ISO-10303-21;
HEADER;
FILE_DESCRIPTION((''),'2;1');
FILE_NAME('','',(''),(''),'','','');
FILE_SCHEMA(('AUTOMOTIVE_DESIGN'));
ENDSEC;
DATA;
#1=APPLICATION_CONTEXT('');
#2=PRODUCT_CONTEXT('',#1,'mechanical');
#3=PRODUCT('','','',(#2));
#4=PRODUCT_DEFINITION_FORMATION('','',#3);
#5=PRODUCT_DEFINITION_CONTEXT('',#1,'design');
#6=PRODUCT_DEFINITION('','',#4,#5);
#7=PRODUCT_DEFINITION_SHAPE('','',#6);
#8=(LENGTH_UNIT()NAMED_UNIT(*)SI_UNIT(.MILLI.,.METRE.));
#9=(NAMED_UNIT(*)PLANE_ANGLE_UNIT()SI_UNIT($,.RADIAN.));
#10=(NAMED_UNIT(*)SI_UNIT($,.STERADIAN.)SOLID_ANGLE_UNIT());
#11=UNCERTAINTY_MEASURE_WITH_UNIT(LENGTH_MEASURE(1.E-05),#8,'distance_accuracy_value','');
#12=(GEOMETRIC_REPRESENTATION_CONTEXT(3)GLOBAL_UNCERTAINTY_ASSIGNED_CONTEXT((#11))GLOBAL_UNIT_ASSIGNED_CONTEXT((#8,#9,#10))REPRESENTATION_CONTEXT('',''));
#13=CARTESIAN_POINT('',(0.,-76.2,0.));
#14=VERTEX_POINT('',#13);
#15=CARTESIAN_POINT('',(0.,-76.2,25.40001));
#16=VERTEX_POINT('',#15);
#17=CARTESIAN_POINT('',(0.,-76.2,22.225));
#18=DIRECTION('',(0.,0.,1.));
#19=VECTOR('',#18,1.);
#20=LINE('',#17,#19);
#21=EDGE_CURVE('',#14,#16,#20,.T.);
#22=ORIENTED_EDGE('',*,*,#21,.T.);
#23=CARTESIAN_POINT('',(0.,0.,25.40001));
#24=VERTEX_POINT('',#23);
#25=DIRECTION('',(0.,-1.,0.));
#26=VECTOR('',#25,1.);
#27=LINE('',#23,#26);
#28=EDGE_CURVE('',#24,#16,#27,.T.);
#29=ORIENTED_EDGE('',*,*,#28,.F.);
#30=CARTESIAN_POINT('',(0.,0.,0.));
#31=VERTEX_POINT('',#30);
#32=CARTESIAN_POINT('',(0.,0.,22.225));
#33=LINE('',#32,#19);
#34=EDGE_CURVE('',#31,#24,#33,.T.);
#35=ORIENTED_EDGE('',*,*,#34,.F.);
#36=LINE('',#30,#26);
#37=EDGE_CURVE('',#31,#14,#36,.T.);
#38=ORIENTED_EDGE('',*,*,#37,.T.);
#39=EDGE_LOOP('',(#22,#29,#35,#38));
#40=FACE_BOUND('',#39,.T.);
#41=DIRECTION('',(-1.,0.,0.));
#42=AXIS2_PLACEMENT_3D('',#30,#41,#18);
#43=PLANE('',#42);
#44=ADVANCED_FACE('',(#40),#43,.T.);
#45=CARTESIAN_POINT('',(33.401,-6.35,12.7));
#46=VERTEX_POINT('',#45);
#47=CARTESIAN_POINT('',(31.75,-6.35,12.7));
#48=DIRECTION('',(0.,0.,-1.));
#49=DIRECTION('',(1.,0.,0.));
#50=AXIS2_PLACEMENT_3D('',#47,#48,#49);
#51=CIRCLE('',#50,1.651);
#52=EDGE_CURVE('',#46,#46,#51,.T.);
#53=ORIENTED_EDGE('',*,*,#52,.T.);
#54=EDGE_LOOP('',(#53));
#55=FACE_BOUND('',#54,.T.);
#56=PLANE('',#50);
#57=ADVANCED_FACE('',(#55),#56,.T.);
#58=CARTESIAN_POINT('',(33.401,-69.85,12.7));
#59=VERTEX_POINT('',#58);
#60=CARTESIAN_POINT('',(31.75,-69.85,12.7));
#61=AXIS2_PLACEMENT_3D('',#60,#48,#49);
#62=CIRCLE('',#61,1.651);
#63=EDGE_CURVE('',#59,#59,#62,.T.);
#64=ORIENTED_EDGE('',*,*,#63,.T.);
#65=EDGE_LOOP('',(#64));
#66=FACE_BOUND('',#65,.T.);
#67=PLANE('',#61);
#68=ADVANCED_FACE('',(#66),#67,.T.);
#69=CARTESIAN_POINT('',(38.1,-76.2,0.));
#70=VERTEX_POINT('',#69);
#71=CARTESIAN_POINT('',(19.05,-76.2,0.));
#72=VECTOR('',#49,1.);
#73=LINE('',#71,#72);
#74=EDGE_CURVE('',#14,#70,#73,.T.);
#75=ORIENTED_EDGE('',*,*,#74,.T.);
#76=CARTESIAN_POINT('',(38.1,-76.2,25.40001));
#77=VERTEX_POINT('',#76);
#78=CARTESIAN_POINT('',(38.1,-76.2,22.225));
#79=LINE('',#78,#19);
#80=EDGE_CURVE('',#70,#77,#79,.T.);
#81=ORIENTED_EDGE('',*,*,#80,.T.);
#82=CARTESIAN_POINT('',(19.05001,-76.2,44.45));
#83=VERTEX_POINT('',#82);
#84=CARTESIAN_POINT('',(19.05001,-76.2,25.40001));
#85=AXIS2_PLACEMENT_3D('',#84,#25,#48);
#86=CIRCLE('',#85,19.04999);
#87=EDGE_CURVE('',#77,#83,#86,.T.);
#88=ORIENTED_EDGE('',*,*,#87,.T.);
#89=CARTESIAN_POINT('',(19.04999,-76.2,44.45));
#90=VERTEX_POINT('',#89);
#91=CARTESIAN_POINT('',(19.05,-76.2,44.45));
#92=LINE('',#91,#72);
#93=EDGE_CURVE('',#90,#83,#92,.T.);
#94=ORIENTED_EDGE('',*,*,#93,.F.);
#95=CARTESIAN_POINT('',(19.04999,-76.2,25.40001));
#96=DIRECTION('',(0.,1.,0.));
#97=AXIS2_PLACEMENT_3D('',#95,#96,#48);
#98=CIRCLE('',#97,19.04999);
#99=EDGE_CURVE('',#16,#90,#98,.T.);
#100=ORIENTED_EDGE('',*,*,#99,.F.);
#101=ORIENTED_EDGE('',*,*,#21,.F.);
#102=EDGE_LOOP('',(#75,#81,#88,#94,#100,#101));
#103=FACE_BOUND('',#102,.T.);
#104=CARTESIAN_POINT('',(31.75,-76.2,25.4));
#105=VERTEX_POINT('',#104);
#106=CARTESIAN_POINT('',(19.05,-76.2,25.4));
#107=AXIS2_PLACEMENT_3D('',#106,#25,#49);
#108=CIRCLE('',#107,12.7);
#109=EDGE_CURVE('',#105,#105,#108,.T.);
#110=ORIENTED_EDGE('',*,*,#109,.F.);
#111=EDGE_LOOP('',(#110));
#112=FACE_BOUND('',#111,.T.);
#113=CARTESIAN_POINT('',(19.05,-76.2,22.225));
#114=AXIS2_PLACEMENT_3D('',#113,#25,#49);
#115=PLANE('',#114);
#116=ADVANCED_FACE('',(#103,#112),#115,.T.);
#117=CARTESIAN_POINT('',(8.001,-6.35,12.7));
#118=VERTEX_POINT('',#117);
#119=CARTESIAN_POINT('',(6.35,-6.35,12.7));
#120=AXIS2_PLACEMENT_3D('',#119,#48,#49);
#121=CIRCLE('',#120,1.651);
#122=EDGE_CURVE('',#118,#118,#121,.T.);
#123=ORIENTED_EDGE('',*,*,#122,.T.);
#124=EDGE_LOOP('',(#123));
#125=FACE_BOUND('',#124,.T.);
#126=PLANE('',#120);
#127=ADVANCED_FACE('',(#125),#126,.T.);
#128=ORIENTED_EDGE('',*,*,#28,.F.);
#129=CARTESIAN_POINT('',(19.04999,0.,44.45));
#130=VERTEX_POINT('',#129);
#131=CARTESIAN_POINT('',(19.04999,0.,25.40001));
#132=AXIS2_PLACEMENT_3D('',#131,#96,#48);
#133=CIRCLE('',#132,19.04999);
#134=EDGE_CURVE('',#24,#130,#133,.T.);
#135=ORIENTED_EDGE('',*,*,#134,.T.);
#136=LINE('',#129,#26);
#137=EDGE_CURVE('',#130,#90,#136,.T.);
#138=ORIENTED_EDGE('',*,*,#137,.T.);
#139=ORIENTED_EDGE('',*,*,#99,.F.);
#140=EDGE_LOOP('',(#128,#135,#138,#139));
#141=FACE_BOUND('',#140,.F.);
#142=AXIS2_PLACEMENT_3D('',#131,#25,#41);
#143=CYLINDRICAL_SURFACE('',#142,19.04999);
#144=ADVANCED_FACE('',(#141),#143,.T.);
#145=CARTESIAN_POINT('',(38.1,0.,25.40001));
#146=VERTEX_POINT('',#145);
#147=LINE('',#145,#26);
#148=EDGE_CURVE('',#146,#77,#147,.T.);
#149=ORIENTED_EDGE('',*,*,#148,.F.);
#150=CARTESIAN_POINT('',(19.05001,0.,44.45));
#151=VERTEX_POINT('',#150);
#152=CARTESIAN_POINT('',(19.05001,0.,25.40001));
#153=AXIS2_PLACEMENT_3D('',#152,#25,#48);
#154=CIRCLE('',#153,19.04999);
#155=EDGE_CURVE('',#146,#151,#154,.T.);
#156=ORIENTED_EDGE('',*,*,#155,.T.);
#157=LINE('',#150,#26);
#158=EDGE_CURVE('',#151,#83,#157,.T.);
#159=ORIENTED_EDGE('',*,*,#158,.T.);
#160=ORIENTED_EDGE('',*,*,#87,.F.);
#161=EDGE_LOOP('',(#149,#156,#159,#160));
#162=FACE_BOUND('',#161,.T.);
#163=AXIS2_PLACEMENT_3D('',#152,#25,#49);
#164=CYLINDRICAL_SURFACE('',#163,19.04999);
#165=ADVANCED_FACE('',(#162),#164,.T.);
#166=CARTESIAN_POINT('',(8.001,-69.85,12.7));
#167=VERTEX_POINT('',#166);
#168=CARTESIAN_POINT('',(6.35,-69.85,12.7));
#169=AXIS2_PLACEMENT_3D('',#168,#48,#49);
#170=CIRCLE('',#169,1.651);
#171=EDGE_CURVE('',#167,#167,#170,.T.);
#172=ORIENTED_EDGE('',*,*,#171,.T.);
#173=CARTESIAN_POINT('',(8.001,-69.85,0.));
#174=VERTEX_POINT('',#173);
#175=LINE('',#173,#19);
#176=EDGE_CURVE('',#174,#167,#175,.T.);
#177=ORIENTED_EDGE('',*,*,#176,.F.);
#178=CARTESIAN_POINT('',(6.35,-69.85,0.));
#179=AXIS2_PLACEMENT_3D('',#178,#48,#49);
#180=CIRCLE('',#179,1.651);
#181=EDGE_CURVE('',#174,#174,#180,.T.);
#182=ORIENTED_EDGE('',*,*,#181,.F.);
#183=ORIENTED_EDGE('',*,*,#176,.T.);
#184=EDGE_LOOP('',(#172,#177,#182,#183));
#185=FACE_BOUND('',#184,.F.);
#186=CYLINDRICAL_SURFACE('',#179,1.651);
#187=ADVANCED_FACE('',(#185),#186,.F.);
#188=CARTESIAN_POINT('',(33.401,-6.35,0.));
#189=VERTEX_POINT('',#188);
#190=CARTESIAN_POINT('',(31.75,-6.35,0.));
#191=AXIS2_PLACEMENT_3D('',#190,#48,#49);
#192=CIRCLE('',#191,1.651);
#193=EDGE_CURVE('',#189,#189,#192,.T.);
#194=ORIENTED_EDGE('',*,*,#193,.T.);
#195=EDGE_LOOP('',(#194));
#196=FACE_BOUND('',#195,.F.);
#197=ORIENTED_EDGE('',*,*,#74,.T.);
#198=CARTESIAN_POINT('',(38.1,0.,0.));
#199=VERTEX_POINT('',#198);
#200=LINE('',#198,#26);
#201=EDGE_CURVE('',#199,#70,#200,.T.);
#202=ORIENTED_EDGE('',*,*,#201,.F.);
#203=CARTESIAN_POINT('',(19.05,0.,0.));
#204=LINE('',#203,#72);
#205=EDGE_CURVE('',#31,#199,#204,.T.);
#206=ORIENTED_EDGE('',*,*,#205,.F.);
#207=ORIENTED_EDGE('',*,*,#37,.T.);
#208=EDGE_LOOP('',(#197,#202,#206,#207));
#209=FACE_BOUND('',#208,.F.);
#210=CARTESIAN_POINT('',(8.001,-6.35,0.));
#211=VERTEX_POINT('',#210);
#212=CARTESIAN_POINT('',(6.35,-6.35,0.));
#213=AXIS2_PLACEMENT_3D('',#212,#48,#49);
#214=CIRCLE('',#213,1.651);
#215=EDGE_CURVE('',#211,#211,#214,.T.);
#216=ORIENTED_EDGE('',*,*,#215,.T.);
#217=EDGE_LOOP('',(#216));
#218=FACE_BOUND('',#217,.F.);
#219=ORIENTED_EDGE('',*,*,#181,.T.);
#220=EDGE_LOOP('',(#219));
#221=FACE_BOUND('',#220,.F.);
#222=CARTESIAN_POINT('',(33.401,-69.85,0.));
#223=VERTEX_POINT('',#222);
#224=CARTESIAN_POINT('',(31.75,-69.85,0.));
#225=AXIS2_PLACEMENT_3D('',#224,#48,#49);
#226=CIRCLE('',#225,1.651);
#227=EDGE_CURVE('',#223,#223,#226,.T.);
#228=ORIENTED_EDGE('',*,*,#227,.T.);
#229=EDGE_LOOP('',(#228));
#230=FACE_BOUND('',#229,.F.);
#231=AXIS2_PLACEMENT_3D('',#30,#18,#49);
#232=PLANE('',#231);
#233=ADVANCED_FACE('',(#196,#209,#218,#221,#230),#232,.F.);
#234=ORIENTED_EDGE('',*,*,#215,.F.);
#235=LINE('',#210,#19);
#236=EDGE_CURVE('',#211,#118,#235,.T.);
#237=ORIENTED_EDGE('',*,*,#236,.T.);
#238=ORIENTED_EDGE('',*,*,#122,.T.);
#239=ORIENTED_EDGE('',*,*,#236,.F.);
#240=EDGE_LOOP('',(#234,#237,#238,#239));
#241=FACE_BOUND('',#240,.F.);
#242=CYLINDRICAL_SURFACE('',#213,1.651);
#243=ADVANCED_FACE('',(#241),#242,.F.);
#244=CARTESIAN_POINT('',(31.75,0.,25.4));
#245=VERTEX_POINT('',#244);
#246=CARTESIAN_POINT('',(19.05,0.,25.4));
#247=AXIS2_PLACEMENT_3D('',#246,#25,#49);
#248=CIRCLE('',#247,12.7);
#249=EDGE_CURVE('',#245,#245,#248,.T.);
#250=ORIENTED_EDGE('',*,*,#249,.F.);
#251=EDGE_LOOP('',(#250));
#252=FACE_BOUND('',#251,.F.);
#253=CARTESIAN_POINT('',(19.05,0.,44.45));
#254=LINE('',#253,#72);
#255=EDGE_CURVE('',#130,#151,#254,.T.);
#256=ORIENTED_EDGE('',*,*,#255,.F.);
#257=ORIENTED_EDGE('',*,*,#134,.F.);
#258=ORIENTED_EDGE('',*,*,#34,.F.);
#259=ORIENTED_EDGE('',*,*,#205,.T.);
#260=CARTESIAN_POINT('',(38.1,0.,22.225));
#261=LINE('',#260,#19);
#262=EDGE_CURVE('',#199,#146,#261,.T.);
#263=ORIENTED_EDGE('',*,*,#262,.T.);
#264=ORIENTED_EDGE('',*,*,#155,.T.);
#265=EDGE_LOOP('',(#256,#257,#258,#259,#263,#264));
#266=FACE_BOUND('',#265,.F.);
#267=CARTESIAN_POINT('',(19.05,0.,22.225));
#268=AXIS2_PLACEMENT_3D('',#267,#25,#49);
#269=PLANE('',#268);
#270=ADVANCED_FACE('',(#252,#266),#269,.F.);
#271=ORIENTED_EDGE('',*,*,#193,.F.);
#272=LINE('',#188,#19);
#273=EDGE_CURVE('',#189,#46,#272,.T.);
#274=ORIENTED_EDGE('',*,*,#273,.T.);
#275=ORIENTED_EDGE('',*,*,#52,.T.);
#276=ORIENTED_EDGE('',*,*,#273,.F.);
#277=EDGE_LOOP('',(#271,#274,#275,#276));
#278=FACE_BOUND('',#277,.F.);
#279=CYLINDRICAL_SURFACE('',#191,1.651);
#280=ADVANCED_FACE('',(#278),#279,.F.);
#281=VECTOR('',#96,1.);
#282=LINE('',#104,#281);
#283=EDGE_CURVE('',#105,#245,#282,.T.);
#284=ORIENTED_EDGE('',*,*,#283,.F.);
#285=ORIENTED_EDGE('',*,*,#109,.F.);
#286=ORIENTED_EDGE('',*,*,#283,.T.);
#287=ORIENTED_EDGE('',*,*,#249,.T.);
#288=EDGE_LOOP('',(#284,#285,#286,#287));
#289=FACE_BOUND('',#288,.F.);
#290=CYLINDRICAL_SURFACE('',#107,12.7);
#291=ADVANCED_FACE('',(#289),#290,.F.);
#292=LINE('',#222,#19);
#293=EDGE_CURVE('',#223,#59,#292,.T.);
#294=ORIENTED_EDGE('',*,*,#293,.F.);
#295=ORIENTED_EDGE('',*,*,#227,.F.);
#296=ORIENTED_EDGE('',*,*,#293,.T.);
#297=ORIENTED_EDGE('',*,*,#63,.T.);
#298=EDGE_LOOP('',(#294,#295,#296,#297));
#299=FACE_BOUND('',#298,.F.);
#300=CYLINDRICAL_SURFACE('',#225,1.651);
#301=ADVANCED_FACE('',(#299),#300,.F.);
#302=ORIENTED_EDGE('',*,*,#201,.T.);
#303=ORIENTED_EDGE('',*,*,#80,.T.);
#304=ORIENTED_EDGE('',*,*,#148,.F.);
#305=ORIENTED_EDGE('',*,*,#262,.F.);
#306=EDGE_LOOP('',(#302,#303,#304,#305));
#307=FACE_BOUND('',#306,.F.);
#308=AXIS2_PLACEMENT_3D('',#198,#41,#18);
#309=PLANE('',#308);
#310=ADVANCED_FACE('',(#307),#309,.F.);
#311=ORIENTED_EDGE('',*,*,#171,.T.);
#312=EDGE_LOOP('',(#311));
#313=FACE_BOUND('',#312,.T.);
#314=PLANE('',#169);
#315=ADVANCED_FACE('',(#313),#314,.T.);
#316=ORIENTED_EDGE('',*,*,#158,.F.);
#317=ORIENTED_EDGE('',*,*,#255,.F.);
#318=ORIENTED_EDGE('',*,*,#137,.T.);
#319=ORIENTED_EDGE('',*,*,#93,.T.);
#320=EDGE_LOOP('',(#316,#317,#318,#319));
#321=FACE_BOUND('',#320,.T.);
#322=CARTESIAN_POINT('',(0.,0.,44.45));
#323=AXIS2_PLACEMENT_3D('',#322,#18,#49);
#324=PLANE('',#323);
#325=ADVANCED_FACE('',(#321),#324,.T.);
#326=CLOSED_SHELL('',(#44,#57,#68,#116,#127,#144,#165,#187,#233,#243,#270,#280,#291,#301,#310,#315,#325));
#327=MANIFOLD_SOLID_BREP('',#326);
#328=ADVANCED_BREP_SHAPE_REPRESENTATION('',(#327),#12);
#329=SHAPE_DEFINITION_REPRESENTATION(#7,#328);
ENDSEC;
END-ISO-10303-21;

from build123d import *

# Parameters (mm, degrees)
F0_W     = 38.1
F0_H     = 44.45
F1_DEPTH = 76.2
F2_R     = 19.04999
F3_R     = 12.7
F4_DEPTH = 76.201
F5_R     = 1.651
F6_DEPTH = 12.7


# Not quite as in the source:
# - a fillet or chamfer is up to 0.001 mm smaller than in the source, because OpenCascade refuses the exact size


with BuildPart() as f1:
    # F0 (on Front) → F1 (new body)
    with BuildSketch(Plane.XZ):
        with Locations((19.05, 22.225)):
            Rectangle(F0_W, F0_H)
    extrude(amount=F1_DEPTH)

    # F2 (radius 19.05 in the source; OpenCascade refuses exactly that, so slightly less here)
    f2_edges = [f1.edges().sort_by_distance(p)[0] for p in [
        (0, -38.1, 44.45),
        (38.1, -38.1, 44.45),
    ]]
    fillet(f2_edges, radius=F2_R)

    # F3 (on face) → F4 (cut, through all)
    with BuildSketch(Plane.XZ.offset(76.2)):
        with Locations((19.05, 25.4)):
            Circle(F3_R)
    extrude(amount=-F4_DEPTH, mode=Mode.SUBTRACT)

    # F5 (on face) → F6 (cut)
    with BuildSketch(Plane(origin=(0, 0, 0), x_dir=(1, 0, 0), z_dir=(0, 0, -1))):
        with Locations((31.75, 69.85)):
            Circle(F5_R)
        with Locations((6.35, 69.85)):
            Circle(F5_R)
        with Locations((31.75, 6.35)):
            Circle(F5_R)
        with Locations((6.35, 6.35)):
            Circle(F5_R)
    extrude(amount=-F6_DEPTH, mode=Mode.SUBTRACT)


solid = f1.part
